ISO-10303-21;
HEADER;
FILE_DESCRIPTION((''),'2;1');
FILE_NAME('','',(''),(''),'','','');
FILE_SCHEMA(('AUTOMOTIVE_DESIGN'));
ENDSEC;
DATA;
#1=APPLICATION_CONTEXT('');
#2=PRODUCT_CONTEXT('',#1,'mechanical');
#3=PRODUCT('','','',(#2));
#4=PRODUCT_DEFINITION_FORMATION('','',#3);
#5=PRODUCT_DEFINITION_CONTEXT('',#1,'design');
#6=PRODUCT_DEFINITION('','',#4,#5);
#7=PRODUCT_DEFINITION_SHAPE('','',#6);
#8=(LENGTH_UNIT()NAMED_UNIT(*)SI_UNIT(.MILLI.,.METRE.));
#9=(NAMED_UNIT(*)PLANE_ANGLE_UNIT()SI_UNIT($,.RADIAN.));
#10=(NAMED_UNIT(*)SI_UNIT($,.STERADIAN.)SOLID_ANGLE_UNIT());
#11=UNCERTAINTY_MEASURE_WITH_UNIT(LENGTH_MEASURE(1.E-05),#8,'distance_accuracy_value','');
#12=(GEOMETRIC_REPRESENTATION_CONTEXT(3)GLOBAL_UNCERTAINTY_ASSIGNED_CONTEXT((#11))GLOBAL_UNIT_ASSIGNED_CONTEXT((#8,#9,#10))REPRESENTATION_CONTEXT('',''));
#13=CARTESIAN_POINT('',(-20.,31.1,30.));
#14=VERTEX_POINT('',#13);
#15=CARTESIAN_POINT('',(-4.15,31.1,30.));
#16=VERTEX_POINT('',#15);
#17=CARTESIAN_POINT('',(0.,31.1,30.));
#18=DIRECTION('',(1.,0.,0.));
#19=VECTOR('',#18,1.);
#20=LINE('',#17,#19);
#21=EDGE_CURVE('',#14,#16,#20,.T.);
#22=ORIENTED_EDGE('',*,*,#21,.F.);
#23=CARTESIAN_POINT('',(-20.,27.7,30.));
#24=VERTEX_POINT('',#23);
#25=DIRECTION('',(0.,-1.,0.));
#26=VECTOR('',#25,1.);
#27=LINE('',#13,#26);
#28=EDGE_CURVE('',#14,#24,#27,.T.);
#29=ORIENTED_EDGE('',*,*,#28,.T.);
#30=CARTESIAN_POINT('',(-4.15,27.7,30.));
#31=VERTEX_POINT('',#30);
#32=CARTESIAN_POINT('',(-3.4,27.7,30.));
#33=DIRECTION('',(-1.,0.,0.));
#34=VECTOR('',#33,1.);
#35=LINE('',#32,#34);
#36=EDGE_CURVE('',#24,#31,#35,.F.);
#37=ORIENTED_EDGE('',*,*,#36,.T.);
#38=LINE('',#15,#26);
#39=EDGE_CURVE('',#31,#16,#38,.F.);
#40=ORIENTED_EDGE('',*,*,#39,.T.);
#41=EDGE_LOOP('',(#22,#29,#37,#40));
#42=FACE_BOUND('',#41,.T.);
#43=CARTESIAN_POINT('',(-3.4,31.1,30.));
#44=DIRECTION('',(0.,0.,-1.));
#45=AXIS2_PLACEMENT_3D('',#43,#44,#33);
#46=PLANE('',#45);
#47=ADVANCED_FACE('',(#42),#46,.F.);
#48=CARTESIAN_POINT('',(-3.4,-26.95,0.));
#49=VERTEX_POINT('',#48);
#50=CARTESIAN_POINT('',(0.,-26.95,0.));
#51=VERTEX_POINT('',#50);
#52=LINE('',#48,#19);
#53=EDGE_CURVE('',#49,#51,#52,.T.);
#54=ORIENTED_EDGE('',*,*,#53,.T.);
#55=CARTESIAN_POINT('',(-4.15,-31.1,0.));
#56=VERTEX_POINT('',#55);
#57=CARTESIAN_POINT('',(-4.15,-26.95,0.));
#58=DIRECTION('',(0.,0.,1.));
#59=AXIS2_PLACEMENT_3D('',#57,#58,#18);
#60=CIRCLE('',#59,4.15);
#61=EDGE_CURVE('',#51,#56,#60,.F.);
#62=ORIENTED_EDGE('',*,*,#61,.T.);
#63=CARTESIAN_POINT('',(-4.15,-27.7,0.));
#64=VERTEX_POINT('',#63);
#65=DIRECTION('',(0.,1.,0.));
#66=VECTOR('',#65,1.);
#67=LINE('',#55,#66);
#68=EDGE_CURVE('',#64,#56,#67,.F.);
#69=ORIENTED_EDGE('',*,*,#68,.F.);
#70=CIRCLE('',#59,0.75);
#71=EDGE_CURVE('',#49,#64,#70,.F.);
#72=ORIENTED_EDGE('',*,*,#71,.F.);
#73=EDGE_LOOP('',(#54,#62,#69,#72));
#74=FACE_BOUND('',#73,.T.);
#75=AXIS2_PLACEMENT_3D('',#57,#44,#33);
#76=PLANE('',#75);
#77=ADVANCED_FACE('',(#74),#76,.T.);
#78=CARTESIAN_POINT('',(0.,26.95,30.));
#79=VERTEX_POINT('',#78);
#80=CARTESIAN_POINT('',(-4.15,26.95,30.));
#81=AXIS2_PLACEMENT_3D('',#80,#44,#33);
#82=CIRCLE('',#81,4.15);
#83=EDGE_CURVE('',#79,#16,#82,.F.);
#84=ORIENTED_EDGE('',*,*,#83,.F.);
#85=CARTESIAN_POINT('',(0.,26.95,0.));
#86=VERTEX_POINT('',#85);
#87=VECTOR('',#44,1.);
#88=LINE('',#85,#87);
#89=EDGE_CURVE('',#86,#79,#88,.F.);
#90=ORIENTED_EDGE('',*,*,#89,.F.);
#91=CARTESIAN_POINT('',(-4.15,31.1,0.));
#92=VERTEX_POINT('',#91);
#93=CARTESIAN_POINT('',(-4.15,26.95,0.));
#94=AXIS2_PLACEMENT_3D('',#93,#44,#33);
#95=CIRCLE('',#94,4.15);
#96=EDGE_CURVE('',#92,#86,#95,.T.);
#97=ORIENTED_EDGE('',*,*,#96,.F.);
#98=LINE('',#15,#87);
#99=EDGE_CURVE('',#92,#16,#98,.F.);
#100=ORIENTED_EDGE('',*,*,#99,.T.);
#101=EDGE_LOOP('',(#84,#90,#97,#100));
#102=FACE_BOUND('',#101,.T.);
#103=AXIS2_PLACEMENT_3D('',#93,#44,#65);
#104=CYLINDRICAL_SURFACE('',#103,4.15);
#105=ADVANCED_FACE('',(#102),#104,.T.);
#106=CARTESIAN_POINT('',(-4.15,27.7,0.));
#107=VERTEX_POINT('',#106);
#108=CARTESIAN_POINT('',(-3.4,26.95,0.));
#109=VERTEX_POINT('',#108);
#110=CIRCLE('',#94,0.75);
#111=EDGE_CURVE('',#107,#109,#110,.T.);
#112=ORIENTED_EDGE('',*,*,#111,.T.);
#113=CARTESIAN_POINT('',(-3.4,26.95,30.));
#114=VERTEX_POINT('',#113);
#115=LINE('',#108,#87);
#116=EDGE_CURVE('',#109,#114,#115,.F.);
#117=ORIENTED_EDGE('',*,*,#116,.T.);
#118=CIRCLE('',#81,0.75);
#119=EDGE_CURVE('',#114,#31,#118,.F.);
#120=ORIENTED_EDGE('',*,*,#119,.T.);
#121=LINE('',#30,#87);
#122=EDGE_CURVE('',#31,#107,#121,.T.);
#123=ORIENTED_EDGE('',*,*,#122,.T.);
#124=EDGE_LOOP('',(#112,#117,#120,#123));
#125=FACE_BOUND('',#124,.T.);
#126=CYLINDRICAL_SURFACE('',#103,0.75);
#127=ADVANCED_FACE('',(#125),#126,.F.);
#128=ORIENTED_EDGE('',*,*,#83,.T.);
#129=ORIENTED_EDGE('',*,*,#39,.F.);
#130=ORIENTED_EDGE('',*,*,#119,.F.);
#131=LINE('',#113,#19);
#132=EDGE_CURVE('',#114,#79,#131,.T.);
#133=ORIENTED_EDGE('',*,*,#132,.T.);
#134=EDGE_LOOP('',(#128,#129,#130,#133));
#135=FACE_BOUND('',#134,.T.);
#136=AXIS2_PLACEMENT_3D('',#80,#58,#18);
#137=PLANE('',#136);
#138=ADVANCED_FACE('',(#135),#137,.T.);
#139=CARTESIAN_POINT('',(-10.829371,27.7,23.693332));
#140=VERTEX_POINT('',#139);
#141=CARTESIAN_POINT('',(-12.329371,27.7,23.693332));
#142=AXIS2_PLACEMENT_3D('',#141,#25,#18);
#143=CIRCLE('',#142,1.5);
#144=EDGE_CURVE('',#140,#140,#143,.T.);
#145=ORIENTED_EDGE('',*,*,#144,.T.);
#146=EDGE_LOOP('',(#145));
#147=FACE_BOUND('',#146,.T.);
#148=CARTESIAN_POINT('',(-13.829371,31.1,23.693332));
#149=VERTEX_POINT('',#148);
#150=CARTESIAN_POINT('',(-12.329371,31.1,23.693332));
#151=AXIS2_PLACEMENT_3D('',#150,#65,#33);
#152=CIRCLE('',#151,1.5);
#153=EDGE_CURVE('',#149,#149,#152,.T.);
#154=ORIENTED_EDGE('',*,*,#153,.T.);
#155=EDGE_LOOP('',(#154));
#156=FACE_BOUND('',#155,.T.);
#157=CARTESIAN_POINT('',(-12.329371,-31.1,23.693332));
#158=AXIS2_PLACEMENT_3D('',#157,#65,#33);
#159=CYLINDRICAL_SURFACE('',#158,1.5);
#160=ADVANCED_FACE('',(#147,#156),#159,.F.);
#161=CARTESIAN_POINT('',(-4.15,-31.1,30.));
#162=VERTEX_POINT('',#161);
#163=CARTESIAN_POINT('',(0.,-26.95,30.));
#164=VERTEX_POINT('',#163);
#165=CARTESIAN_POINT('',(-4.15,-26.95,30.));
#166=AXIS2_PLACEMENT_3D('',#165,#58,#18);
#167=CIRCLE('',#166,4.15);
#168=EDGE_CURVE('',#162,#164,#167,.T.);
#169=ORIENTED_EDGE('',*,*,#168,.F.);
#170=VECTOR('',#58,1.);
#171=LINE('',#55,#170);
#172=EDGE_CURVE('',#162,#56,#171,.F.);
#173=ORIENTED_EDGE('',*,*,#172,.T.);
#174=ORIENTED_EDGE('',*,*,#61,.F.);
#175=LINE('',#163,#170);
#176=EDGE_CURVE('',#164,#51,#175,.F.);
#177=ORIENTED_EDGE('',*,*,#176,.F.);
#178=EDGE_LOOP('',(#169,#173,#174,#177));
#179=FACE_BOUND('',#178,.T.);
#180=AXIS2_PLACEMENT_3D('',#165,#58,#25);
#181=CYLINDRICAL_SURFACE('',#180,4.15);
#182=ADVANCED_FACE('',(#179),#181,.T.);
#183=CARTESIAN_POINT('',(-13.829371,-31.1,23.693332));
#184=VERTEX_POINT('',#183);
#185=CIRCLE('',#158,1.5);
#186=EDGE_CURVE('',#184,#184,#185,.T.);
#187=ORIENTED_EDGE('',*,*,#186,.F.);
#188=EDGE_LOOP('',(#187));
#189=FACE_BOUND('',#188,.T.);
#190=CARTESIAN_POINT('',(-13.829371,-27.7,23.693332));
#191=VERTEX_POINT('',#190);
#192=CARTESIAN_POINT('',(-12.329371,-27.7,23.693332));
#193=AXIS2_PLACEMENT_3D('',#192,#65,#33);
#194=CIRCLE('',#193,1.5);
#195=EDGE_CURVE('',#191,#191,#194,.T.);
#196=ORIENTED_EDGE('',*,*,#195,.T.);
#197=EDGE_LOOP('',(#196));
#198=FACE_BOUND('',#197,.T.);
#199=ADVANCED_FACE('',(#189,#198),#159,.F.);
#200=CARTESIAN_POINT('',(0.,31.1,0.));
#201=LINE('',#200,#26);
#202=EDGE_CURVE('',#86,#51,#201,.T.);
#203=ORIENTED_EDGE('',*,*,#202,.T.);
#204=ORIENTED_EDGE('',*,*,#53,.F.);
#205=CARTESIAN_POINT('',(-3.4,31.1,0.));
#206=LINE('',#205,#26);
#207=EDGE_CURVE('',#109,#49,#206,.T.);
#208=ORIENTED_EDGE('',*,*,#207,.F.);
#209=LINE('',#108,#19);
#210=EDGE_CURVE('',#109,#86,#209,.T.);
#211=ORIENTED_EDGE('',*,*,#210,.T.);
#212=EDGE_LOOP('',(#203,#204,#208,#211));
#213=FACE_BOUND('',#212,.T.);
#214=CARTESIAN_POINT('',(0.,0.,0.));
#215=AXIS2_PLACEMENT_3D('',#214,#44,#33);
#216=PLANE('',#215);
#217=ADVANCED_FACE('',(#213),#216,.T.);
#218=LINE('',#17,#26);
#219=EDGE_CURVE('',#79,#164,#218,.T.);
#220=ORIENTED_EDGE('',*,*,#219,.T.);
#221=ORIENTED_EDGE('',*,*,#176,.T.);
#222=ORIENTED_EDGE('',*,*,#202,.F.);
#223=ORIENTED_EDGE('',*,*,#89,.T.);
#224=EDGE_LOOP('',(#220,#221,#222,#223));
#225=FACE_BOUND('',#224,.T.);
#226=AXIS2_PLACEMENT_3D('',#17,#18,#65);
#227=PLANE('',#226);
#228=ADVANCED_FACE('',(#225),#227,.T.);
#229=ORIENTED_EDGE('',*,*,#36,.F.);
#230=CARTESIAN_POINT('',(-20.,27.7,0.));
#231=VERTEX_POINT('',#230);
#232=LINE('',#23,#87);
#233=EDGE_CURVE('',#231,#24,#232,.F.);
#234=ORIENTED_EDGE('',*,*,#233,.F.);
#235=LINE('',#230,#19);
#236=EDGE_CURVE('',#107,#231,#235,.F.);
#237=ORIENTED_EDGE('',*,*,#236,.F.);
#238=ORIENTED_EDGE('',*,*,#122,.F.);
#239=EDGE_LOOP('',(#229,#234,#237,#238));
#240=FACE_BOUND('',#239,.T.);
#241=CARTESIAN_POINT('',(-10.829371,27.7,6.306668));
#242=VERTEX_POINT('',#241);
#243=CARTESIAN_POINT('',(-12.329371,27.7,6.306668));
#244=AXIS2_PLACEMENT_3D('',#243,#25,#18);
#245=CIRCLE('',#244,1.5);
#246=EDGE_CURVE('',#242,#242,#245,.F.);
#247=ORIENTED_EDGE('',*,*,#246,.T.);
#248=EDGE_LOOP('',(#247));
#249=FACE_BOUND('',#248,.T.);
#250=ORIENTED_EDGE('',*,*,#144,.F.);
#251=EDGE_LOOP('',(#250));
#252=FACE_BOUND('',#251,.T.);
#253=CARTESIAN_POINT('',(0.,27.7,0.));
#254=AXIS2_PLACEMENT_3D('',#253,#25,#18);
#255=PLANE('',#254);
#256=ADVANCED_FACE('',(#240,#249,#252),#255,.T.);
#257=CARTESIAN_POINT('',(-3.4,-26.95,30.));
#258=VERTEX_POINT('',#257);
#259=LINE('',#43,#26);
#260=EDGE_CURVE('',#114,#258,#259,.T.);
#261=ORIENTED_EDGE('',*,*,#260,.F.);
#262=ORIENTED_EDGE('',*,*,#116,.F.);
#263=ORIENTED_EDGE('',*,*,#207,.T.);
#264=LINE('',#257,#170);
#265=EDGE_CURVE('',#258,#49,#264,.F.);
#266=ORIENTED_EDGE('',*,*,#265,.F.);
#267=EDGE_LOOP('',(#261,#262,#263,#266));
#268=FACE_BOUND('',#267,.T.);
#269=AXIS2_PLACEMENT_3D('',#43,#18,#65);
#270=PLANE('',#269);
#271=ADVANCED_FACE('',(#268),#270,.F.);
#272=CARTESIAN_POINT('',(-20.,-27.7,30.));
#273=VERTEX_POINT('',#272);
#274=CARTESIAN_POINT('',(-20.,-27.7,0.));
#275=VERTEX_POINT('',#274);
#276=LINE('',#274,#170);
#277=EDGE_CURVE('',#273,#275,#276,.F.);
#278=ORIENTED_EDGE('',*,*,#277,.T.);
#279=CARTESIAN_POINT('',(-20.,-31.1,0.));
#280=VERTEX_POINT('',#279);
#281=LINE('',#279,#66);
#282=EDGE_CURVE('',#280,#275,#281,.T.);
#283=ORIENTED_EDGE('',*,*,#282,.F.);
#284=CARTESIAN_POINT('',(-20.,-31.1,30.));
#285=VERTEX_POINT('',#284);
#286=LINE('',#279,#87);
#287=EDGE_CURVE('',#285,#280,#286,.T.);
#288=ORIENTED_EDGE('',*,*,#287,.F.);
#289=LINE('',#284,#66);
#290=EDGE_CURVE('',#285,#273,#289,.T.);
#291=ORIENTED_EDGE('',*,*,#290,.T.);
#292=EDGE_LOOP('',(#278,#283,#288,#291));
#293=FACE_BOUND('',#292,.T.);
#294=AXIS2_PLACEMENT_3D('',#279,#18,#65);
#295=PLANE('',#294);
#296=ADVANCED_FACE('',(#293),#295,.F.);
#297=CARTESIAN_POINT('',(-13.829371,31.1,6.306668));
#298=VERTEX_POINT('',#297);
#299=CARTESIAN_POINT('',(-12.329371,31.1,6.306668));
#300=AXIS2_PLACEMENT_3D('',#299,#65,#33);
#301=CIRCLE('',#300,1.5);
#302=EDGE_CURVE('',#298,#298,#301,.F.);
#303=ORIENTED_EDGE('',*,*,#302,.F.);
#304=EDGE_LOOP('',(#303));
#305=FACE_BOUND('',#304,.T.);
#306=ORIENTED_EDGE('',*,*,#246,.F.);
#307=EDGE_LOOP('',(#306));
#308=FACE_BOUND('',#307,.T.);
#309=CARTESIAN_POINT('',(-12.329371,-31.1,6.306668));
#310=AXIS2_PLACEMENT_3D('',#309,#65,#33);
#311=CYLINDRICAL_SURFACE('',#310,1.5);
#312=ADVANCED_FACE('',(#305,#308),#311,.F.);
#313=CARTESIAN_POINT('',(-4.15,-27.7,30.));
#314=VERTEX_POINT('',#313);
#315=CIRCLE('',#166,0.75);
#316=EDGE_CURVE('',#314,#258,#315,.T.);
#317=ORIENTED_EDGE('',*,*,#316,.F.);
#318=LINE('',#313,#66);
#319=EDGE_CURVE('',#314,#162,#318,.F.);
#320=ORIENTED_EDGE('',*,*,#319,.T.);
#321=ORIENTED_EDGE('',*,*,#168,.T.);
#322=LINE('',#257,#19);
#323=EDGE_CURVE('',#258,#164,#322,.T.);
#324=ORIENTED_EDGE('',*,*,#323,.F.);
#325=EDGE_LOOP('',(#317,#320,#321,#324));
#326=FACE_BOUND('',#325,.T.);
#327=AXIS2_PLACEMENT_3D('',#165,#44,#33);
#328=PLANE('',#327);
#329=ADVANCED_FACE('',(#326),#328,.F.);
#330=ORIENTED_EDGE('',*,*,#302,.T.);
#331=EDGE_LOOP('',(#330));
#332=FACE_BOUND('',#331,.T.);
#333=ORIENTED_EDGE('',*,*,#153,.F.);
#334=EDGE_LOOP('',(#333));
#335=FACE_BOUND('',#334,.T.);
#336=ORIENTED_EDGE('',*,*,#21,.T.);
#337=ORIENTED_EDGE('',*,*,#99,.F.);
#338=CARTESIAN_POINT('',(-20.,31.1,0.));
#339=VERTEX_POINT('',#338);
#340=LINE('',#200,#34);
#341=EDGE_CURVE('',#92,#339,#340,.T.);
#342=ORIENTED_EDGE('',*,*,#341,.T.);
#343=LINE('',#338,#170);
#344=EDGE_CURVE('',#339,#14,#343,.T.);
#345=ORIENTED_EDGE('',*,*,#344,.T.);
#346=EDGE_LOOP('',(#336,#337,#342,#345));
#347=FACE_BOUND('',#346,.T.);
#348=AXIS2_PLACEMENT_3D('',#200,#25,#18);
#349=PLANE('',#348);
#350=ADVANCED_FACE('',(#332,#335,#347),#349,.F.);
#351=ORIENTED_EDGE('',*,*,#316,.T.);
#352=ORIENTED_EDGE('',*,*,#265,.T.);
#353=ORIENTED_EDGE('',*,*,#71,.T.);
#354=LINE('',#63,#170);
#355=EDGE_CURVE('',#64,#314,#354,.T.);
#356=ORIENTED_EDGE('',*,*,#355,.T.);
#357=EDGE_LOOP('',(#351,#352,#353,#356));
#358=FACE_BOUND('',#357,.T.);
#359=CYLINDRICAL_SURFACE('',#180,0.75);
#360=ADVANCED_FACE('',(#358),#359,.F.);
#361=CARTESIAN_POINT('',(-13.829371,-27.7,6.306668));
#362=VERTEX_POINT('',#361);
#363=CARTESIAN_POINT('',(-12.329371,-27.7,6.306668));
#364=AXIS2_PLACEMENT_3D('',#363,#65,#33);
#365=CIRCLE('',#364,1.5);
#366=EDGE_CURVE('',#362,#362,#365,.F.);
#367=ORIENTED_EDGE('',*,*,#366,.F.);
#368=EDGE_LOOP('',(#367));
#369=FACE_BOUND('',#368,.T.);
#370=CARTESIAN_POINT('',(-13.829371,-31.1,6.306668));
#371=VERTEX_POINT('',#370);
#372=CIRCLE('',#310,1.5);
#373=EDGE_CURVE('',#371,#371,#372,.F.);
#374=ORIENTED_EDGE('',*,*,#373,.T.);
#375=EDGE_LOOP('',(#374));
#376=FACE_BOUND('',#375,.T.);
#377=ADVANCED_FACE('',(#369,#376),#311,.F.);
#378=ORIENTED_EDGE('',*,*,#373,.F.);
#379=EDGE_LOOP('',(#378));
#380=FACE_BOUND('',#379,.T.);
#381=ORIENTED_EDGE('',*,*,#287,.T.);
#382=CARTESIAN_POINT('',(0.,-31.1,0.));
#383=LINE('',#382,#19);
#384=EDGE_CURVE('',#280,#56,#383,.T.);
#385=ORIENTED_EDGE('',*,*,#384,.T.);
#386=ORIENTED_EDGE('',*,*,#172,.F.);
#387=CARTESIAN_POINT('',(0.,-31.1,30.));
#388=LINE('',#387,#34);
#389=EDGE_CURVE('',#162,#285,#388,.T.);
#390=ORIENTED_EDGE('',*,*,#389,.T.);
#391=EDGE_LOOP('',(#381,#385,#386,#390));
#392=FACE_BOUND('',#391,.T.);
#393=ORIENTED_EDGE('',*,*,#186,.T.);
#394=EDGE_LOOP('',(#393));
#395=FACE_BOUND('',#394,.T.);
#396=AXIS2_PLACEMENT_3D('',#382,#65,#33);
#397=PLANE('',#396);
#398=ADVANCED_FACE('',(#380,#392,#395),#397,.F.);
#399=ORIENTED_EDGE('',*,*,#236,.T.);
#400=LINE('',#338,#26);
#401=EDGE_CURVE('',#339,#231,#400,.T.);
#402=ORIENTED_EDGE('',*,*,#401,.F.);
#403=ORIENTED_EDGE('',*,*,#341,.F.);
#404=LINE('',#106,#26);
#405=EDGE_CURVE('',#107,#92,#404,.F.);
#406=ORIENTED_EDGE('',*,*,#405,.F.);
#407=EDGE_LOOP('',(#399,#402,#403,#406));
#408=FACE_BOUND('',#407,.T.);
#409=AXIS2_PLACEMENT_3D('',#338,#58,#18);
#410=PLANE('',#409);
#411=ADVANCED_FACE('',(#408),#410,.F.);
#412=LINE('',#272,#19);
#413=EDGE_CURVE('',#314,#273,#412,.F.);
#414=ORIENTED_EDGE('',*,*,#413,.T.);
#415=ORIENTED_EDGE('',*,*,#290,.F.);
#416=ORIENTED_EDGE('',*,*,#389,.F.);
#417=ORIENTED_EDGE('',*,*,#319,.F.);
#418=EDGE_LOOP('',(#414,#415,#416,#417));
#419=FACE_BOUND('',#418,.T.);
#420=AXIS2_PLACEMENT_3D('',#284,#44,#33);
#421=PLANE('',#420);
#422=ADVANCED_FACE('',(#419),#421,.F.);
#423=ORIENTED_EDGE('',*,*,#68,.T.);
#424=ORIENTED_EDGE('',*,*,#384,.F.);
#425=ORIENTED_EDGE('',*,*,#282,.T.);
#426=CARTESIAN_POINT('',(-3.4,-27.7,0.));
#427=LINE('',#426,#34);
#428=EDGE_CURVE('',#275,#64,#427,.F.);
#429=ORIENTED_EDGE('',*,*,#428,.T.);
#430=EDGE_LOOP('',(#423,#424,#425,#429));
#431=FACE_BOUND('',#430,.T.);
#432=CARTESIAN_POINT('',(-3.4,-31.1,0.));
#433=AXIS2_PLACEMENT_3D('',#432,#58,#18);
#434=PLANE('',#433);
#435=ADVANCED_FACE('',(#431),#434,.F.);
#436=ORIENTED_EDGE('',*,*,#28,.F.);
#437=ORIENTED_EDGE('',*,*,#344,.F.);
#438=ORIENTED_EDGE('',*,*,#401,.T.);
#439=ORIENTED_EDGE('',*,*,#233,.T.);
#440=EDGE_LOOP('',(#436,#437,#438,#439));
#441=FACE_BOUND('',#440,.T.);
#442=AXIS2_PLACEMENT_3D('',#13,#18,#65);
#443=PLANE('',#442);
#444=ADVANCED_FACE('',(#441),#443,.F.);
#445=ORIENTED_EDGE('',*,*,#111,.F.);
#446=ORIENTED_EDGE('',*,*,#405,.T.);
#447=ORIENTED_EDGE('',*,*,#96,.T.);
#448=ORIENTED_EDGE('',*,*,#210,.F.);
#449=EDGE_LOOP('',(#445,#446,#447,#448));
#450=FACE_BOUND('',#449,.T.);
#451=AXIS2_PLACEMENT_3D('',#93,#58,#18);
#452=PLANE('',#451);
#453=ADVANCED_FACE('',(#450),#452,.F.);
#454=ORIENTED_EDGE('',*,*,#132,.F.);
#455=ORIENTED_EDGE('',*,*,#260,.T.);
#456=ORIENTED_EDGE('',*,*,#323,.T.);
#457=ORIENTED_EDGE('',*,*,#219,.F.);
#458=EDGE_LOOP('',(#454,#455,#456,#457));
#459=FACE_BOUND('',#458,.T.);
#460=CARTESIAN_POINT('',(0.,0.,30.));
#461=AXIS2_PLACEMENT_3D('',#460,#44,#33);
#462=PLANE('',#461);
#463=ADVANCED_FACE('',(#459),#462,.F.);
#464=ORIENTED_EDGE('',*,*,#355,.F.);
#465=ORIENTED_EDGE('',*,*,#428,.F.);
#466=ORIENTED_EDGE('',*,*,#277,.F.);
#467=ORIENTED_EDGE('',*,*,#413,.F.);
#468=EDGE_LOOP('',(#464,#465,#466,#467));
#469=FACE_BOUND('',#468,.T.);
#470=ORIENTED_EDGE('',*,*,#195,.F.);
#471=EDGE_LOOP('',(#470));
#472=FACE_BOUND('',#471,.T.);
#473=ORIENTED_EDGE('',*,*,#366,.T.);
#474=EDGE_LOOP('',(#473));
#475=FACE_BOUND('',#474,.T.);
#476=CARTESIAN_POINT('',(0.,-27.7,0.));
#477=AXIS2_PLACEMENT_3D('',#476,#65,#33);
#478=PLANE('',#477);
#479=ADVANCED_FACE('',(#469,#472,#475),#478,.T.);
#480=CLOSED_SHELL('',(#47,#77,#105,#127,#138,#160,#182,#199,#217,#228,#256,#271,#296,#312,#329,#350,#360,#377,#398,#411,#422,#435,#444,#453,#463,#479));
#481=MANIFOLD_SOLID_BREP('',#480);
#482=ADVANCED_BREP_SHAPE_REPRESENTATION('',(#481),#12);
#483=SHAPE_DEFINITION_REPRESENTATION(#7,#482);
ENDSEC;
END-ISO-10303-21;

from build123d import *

# Parameters (mm, degrees)
SKETCH11_W                     = 3.4
SKETCH11_H                     = 62.2
BASE_FLANGE3_DEPTH             = 30
EDGE_FLANGE1_STRIP_W           = 15.1
EDGE_FLANGE1_STRIP_H           = 3.4
EDGE_FLANGE1_STRIP_CUT_DEPTH   = 30
EDGE_FLANGE1_STRIP_2_W         = 15.1
EDGE_FLANGE1_STRIP_2_H         = 3.4
EDGE_FLANGE1_STRIP_CUT_2_DEPTH = 30
EDGE_FLANGE1_DEPTH             = 30
EDGE_FLANGE1_BEND_DEPTH        = 30
SKETCH22_R                     = 1.5
CUT_EXTRUDE1_DEPTH             = 72.894645141


# Sheet-metal steps are written as plain solids
with BuildPart() as part:
    # Sketch11 → Base-Flange3 (new body)
    with BuildSketch(Plane.XY):
        with Locations((-1.7, 0)):
            Rectangle(SKETCH11_W, SKETCH11_H)
    extrude(amount=BASE_FLANGE3_DEPTH)

    # Edge-Flange1 strip (across the edge) → Edge-Flange1 strip cut (cut)
    with BuildSketch(Plane(origin=(-3.4, 31.1, 30), x_dir=(0, -1, 0), z_dir=(0, 0, -1))):
        with Locations((-3.4, -1.7)):
            Rectangle(EDGE_FLANGE1_STRIP_W, EDGE_FLANGE1_STRIP_H)
    extrude(amount=EDGE_FLANGE1_STRIP_CUT_DEPTH, mode=Mode.SUBTRACT)

    # Edge-Flange1 strip 2 (across the edge) → Edge-Flange1 strip cut 2 (cut)
    with BuildSketch(Plane(origin=(-3.4, -31.1, 0), x_dir=(0, 1, 0), z_dir=(0, 0, 1))):
        with Locations((-3.4, -1.7)):
            Rectangle(EDGE_FLANGE1_STRIP_2_W, EDGE_FLANGE1_STRIP_2_H)
    extrude(amount=EDGE_FLANGE1_STRIP_CUT_2_DEPTH, mode=Mode.SUBTRACT)

    # Edge-Flange1 section (across the edge) → Edge-Flange1 (add)
    with BuildSketch(Plane(origin=(-3.4, 31.1, 30), x_dir=(0, -1, 0), z_dir=(0, 0, -1))):
        with BuildLine():
            Line((0, 0.75), (0, 16.6))
            Line((0, 16.6), (3.4, 16.6))
            Line((3.4, 16.6), (3.4, 0.75))
            ThreePointArc((3.4, 0.75), (3.619669914, 0.219669914), (4.15, 0))
            Line((4.15, 0), (4.15, -3.4))
            ThreePointArc((4.15, -3.4), (1.215506858, -2.184493142), (0, 0.75))
        make_face()
    extrude(amount=EDGE_FLANGE1_DEPTH)

    # Edge-Flange1 section 2 (across the edge) → Edge-Flange1 bend (add)
    with BuildSketch(Plane(origin=(-3.4, -31.1, 0), x_dir=(0, 1, 0), z_dir=(0, 0, 1))):
        with BuildLine():
            Line((0, 0.75), (0, 16.6))
            Line((0, 16.6), (3.4, 16.6))
            Line((3.4, 16.6), (3.4, 0.75))
            ThreePointArc((3.4, 0.75), (3.619669914, 0.219669914), (4.15, 0))
            Line((4.15, 0), (4.15, -3.4))
            ThreePointArc((4.15, -3.4), (1.215506858, -2.184493142), (0, 0.75))
        make_face()
    extrude(amount=EDGE_FLANGE1_BEND_DEPTH)

    # Sketch22 → Cut-Extrude1 (cut, through all)
    with BuildSketch(Plane(origin=(0, 31.1, 0), x_dir=(1, 0, 0), z_dir=(0, 1, 0))):
        with Locations(Location((-12.329371406, -23.693332437, 0), (0, 0, 180))):
            Circle(SKETCH22_R)
        with Locations(Location((-12.329371406, -6.306667563, 0), (0, 0, 180))):
            Circle(SKETCH22_R)
    extrude(amount=-CUT_EXTRUDE1_DEPTH, mode=Mode.SUBTRACT)


solid = part.part
